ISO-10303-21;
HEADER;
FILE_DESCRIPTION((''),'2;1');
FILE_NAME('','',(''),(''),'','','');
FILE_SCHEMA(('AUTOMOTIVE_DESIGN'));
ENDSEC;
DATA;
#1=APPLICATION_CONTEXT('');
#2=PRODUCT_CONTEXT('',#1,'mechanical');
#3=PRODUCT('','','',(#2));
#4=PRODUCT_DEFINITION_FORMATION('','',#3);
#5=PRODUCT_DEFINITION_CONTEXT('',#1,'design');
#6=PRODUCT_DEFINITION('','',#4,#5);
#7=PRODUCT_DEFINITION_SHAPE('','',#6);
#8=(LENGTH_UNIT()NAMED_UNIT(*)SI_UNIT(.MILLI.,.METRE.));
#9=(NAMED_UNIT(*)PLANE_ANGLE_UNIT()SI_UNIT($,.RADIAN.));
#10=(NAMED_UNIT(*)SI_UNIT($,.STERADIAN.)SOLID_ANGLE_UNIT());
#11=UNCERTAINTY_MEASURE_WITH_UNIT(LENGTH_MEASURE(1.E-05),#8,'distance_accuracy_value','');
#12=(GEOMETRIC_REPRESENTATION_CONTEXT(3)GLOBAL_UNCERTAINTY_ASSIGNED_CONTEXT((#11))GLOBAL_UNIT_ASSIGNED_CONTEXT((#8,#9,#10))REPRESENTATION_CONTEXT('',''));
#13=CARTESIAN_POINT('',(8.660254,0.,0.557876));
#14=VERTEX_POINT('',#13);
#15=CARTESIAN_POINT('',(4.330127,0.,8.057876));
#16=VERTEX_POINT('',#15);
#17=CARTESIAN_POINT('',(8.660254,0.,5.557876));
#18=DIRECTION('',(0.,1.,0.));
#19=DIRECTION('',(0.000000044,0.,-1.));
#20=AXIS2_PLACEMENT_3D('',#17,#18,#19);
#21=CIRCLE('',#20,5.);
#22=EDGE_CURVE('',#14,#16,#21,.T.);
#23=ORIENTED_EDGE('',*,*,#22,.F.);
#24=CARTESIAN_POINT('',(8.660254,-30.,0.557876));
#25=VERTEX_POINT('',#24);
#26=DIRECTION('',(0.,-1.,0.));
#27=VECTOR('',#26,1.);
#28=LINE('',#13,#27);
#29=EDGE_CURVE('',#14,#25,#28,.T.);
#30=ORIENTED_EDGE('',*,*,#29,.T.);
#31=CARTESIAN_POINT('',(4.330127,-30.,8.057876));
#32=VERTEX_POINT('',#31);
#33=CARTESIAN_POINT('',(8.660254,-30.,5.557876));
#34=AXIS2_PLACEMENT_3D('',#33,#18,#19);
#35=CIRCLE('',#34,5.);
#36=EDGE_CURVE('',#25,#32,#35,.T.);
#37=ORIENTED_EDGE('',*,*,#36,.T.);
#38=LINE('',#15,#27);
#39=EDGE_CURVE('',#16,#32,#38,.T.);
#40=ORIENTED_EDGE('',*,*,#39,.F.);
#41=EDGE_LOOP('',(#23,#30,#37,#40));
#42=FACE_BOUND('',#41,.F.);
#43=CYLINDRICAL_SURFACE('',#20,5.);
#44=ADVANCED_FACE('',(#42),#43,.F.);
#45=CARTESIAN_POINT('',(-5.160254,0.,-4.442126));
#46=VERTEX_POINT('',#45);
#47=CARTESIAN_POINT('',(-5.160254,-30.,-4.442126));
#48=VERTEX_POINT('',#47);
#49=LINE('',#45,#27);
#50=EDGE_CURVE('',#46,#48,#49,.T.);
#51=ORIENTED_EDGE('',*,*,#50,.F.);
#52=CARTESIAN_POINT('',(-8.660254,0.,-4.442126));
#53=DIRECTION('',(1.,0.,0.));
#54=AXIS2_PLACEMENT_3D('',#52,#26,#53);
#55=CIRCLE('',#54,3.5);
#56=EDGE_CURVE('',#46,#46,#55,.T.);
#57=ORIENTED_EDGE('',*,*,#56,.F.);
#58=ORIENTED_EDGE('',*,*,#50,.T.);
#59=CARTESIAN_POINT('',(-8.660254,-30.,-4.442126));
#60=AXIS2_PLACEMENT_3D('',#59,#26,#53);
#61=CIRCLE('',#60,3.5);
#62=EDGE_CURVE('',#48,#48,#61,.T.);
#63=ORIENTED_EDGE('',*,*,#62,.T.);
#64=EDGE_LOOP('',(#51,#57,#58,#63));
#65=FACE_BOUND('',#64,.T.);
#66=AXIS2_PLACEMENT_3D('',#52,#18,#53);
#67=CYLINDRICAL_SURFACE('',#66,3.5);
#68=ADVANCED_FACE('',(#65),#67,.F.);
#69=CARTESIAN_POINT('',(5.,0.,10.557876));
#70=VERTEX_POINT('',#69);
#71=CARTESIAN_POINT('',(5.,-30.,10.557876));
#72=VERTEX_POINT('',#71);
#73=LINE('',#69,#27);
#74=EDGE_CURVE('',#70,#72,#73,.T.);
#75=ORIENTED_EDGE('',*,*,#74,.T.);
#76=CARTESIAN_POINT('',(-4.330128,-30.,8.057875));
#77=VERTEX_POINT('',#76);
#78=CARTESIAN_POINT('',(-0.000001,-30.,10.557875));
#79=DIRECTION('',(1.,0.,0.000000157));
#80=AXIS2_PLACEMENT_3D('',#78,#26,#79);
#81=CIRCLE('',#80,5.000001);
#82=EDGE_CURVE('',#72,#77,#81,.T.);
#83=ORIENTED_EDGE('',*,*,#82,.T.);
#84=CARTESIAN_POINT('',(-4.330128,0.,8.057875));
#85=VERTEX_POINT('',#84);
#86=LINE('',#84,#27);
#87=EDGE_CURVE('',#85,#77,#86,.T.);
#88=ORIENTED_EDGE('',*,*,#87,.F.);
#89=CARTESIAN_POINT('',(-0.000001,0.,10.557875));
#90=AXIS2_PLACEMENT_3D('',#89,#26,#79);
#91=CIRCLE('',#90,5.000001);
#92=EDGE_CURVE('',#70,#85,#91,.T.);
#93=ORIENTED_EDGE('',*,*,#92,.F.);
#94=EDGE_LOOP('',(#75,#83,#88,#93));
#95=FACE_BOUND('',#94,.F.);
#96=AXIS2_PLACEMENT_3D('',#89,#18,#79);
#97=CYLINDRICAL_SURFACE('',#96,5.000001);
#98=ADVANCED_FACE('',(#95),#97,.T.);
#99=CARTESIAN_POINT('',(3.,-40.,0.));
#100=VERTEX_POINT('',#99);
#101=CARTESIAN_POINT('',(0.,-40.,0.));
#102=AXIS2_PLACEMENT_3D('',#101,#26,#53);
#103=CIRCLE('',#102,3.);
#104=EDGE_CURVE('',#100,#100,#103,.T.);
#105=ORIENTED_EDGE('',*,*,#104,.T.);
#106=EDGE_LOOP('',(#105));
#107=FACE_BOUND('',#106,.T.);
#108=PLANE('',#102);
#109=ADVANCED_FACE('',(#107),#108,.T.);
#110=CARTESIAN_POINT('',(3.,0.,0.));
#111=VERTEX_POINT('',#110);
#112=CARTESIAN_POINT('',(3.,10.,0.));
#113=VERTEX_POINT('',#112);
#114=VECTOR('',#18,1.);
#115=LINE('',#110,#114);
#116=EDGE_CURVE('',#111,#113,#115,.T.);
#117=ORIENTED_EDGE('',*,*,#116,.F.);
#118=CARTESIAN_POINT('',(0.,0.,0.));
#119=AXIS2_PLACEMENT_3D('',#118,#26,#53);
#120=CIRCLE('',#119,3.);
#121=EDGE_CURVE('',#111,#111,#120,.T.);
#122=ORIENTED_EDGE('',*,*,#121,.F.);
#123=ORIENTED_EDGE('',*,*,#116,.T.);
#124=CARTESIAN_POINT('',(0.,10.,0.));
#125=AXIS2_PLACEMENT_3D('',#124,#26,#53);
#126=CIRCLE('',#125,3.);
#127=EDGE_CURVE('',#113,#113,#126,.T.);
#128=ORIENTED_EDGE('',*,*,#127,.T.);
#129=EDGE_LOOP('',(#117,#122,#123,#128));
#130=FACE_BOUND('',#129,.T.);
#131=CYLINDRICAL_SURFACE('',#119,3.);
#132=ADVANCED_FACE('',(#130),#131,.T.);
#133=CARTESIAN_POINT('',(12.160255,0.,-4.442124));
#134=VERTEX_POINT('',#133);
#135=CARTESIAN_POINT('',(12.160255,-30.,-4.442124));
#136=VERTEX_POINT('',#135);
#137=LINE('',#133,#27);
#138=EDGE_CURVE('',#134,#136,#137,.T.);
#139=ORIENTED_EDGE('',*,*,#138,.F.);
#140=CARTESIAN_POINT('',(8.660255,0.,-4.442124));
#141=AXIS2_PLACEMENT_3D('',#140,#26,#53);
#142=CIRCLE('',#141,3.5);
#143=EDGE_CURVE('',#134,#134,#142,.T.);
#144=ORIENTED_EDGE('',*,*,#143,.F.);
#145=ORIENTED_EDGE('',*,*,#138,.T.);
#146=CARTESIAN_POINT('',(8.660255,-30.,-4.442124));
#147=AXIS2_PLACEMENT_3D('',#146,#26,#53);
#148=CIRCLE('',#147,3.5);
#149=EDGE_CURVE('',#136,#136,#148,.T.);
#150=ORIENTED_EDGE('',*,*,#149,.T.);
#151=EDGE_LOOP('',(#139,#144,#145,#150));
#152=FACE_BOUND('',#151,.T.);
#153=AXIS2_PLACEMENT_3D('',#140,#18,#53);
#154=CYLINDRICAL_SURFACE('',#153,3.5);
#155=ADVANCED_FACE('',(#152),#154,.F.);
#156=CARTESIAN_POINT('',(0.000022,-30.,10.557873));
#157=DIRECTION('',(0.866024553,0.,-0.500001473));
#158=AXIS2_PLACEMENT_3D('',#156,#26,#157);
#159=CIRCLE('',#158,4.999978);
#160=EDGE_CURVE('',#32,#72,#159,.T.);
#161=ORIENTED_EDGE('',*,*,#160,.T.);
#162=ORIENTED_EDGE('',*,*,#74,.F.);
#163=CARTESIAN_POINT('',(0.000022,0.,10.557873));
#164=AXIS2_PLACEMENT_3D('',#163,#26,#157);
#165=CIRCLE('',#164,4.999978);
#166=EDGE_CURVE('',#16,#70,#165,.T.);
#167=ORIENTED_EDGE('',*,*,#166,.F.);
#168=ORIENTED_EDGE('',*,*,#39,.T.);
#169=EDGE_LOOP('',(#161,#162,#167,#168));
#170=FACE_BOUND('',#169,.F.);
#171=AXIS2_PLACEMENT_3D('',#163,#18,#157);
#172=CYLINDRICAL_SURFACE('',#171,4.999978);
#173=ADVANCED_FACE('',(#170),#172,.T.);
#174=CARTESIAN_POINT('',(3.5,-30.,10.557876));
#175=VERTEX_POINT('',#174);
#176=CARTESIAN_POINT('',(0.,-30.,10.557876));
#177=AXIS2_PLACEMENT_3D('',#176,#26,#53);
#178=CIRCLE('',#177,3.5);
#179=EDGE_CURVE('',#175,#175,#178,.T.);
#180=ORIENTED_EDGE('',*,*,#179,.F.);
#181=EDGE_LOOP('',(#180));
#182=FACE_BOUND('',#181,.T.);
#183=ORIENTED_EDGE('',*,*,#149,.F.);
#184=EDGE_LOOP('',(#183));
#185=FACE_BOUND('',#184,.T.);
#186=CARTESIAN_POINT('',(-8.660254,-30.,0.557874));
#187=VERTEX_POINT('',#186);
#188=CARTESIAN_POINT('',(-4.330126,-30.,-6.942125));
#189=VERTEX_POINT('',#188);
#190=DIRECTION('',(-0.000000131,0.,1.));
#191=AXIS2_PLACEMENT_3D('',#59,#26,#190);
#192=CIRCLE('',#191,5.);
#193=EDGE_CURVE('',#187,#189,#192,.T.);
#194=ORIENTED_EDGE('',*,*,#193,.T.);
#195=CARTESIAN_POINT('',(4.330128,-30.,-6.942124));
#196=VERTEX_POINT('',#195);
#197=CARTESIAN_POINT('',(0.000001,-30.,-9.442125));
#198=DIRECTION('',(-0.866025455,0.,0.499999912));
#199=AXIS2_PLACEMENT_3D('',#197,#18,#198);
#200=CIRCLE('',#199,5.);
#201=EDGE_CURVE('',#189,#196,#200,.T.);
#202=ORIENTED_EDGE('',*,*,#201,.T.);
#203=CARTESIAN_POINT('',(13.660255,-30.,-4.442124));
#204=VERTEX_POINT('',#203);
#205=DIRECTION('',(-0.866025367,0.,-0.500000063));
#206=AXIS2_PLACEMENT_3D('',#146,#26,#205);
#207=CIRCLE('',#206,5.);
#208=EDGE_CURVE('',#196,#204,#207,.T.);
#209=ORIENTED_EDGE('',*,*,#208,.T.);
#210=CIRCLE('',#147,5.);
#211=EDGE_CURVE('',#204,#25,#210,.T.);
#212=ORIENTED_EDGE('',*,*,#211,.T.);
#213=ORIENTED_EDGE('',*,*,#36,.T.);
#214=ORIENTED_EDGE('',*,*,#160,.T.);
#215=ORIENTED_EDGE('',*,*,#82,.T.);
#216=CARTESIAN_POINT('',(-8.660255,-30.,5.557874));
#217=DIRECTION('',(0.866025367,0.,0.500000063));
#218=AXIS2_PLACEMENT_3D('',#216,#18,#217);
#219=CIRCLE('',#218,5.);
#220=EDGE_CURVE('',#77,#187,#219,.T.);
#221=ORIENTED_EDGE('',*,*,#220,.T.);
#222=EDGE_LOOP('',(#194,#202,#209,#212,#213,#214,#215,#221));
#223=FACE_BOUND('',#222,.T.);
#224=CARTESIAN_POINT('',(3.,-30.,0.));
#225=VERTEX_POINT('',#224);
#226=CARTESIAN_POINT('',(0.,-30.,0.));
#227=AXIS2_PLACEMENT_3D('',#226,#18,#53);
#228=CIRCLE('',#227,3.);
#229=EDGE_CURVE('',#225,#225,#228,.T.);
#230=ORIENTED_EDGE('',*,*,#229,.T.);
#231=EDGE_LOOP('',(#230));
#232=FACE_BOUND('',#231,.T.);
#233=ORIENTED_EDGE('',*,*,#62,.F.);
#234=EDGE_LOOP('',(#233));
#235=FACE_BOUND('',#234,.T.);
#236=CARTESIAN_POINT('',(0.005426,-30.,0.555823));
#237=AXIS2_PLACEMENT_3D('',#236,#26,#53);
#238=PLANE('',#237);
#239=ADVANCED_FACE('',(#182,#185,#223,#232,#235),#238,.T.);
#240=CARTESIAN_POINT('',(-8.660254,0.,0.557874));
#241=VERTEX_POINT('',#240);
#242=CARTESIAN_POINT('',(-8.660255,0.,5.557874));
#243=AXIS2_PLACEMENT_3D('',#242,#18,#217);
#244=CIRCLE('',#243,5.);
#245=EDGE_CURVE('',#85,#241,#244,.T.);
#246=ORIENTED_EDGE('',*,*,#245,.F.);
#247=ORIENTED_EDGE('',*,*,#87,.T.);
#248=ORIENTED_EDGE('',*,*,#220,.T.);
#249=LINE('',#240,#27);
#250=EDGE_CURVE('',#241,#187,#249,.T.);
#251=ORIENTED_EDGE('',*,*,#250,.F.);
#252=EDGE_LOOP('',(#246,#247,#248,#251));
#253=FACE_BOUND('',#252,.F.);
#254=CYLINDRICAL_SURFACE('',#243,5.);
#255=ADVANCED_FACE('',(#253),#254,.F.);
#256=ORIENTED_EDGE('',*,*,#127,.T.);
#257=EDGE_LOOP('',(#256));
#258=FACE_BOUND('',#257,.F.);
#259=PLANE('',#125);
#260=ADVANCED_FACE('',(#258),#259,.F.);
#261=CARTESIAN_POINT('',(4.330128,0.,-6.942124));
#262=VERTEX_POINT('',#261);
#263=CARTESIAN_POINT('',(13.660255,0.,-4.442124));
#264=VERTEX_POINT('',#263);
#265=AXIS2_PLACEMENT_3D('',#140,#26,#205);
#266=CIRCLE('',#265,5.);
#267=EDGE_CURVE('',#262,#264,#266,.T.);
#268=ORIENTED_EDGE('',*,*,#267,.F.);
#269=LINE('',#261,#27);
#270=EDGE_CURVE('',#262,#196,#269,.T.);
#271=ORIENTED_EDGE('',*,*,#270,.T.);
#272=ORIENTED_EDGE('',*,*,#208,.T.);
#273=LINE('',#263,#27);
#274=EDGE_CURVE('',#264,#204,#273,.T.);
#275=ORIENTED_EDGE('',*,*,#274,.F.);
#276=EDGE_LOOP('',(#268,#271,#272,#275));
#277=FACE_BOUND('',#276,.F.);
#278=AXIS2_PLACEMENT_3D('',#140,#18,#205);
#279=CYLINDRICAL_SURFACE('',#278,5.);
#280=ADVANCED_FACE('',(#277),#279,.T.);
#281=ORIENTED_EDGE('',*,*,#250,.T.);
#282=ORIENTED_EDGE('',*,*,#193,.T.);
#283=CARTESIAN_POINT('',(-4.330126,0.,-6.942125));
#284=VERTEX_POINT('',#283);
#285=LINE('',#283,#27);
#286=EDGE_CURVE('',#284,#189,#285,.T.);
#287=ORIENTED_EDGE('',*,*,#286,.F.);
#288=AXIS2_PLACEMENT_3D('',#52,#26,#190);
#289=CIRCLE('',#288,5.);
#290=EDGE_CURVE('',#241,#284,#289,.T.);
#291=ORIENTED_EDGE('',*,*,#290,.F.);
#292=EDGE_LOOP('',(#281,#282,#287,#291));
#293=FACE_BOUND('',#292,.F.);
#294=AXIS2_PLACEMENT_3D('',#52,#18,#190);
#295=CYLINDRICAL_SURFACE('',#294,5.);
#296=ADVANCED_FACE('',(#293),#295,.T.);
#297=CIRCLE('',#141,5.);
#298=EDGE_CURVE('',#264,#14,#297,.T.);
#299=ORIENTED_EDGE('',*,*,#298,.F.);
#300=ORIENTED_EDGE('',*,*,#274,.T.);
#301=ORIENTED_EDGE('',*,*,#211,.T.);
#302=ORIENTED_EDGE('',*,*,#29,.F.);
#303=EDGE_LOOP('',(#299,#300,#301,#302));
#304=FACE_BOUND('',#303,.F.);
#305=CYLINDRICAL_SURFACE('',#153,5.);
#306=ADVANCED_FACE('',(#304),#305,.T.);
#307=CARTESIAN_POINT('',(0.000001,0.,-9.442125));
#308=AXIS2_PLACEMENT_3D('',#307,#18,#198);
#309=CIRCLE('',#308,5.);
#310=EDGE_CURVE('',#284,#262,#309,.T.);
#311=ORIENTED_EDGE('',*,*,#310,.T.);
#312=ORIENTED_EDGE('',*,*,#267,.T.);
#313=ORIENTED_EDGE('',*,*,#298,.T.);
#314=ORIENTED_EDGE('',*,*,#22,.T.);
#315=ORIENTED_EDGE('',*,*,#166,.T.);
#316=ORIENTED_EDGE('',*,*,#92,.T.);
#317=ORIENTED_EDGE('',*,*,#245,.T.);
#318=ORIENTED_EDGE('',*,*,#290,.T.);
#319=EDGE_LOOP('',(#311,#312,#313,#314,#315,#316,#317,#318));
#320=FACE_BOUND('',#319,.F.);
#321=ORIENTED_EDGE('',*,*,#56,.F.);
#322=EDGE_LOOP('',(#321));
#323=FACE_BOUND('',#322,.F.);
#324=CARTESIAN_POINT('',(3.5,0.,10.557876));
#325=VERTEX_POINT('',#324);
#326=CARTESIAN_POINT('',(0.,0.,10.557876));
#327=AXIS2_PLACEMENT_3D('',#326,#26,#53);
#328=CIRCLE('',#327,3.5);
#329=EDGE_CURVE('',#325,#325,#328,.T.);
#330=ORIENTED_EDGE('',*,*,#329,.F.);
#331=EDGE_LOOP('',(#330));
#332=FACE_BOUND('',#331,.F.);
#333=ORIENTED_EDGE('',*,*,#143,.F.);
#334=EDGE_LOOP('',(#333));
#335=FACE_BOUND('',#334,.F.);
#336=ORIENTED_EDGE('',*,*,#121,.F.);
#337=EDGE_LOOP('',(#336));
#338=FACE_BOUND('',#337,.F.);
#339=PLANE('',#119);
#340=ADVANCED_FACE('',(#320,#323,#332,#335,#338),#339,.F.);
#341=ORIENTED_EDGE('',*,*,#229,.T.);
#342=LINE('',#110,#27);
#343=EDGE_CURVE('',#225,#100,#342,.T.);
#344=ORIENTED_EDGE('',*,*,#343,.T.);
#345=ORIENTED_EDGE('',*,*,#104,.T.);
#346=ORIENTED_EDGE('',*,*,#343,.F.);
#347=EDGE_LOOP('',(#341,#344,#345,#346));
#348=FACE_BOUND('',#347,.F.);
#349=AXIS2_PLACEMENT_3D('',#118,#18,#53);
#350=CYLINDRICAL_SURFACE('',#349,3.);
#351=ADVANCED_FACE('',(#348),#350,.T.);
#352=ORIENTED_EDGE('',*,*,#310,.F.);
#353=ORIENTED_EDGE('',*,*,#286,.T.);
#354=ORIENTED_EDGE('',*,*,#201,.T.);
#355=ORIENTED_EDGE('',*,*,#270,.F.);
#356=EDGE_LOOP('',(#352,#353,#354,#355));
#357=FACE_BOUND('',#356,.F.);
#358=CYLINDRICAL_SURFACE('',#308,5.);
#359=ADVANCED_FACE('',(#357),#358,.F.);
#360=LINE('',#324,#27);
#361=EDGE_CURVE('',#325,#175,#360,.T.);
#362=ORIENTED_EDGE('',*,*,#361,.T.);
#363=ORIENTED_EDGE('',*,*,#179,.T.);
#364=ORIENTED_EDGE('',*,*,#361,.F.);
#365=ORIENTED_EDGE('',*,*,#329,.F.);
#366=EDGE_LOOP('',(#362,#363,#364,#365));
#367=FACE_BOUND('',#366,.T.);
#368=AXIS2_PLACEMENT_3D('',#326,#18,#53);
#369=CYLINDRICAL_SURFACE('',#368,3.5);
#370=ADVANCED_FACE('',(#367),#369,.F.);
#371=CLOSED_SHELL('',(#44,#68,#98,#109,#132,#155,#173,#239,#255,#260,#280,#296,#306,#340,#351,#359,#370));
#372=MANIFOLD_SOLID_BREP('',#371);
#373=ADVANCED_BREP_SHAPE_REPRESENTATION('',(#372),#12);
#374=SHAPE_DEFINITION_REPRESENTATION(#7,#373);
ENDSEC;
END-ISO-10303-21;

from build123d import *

# Parameters (mm, degrees)
F0_R          = 3.5
F1_DEPTH      = 30
F2_R          = 3
F3_DEPTH      = 40
F3_DEPTH_BACK = 10


# Not quite as in the source:
# - ends of sketch curves that miss each other by under 0.0002 mm in the source are joined


with BuildPart() as f1:
    # F0 (on Front) → F1 (new body)
    with BuildSketch(Plane.XZ):
        with BuildLine():
            ThreePointArc((-4.3301281481, 8.0578746702), (-6.557e-07, 5.5578757428), (4.330125744, 8.057876563))
            ThreePointArc((4.330125744, 8.057876563), (4.8296291409, 9.2637805524), (5, 10.5578757428))
            ThreePointArc((5, 10.5578757428), (-1.2940954014, 15.3875048271), (-4.3301281481, 8.0578746702))
        make_face()
        with Locations((0, 10.5578757428)):
            Circle(F0_R, mode=Mode.SUBTRACT)
        with BuildLine():
            ThreePointArc((8.6602543293, 0.557875869), (4.3301271646, 3.0578757428), (4.3301270553, 8.0578758059))
            ThreePointArc((4.3301270553, 8.0578758059), (-6.557e-07, 5.5578757428), (-4.3301281481, 8.0578746702))
            ThreePointArc((-4.3301281481, 8.0578746702), (-4.330127711, 3.0578747964), (-8.6602543293, 0.5578743547))
            ThreePointArc((-8.6602543293, 0.5578743547), (-5.1247199995, -0.9065915075), (-3.6602536736, -4.4421256453))
            ThreePointArc((-3.6602536736, -4.4421256453), (-3.8306244761, -5.7362206245), (-4.3301263997, -6.9421252036))
            ThreePointArc((-4.3301263997, -6.9421252036), (4.371e-07, -4.442124762), (4.330127711, -6.9421244465))
            ThreePointArc((4.330127711, -6.9421244465), (4.3301273832, -1.9421243834), (8.6602543293, 0.557875869))
        make_face()
        with BuildLine():
            ThreePointArc((13.6602545478, -4.442124131), (12.1957883765, -0.9065901478), (8.6602543293, 0.557875869))
            ThreePointArc((8.6602543293, 0.557875869), (4.3301273832, -1.9421243834), (4.330127711, -6.9421244465))
            ThreePointArc((4.330127711, -6.9421244465), (9.9543499492, -9.2717532153), (13.6602545478, -4.442124131))
        make_face()
        with Locations((8.6602545478, -4.442124131)):
            Circle(F0_R, mode=Mode.SUBTRACT)
        with BuildLine():
            ThreePointArc((-3.6602536736, -4.4421256453), (-5.1247199995, -0.9065915075), (-8.6602543293, 0.5578743547))
            ThreePointArc((-8.6602543293, 0.5578743547), (-12.9903804011, -6.94212615), (-4.3301263997, -6.9421252036))
            ThreePointArc((-4.3301263997, -6.9421252036), (-3.8306244761, -5.7362206245), (-3.6602536736, -4.4421256453))
        make_face()
        with Locations((-8.6602536736, -4.4421256453)):
            Circle(F0_R, mode=Mode.SUBTRACT)
    extrude(amount=F1_DEPTH)

    # F2 (on Front) → F3 (join, two sides)
    with BuildSketch(Plane.XZ) as f3_sk:
        Circle(F2_R)
    extrude(amount=F3_DEPTH)
    extrude(f3_sk.sketch, amount=-F3_DEPTH_BACK)


solid = f1.part
